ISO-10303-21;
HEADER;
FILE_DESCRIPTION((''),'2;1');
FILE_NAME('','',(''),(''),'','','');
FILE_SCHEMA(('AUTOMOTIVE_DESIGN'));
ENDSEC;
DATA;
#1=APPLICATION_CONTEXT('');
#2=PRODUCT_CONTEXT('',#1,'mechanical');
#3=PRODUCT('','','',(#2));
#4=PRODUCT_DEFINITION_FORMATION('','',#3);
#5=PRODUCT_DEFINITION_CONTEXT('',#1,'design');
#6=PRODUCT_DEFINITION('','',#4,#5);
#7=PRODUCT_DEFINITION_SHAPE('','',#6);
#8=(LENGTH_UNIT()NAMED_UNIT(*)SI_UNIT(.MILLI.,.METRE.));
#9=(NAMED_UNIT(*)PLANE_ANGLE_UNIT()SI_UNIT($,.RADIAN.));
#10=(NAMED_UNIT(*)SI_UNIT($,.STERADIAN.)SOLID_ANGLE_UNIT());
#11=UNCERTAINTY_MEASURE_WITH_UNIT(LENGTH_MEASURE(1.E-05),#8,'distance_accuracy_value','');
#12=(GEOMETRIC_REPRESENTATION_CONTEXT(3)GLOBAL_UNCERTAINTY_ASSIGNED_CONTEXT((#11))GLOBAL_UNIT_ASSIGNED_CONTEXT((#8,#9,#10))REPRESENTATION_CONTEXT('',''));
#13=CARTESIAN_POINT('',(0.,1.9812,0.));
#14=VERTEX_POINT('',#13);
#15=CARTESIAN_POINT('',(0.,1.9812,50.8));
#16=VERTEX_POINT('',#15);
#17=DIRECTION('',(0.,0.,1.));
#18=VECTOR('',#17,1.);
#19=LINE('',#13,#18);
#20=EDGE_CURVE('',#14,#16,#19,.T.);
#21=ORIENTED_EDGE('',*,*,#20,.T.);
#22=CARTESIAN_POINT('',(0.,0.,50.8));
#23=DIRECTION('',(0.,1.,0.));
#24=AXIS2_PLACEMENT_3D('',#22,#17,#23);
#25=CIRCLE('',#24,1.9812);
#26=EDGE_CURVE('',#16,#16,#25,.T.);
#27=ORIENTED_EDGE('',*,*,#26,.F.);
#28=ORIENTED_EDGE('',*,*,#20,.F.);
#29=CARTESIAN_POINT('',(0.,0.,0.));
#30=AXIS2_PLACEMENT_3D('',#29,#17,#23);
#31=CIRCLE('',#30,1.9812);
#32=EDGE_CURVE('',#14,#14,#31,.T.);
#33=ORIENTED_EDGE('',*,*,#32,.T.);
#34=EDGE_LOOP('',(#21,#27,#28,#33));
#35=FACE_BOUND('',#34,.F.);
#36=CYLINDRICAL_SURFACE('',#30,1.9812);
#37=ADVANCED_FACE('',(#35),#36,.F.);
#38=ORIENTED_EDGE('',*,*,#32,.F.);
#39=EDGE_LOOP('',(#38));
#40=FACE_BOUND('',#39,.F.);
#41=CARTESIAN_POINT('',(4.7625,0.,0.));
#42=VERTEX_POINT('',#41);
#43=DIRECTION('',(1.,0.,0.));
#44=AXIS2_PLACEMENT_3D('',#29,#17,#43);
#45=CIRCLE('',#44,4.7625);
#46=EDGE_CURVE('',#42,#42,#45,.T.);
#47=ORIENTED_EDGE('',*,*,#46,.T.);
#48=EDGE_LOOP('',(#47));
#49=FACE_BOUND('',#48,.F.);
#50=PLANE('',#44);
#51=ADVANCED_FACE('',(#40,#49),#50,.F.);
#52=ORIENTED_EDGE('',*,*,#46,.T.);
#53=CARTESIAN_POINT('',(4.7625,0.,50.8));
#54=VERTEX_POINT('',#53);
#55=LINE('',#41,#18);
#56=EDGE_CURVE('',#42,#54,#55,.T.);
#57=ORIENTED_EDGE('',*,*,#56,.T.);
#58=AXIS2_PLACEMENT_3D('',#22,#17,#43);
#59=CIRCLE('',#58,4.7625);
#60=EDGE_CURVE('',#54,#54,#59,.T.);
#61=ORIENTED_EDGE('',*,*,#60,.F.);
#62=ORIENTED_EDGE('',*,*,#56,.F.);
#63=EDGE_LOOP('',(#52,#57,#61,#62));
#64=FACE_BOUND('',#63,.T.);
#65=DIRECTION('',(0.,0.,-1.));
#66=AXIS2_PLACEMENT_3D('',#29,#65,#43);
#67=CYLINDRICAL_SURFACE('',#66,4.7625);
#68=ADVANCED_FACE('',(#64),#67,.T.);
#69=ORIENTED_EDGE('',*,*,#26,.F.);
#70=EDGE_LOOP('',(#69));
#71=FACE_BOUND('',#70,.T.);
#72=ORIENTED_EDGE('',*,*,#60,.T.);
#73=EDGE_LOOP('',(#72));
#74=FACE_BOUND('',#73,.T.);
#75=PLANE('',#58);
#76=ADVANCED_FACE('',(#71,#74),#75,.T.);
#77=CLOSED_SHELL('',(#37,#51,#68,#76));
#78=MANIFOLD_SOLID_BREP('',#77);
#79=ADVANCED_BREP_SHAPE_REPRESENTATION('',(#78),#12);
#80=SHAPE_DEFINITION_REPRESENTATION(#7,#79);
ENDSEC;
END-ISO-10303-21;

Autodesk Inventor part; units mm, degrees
ref_plane "YZ Plane" through (0, 0, 0) normal (1, 0, 0) x (0, 1, 0)
ref_plane "XZ Plane" through (0, 0, 0) normal (0, 1, 0) x (-1, 0, 0)
ref_plane "XY Plane" through (0, 0, 0) normal (0, 0, 1) x (1, 0, 0)
sketch "Sketch1" plane through (0, 0, 0) normal (0, 0, 1) x (1, 0, 0)
  circle A0 centre (0, 0) radius 4.7625
  dimension "d10" = 9.525
extrude "Extrusion1" add sketch "Sketch1" along normal blind 50.8
hole "Hole1" at (0, 0, 0) direction (0, 0, 1) diameter 3.9624 end through all thread size "10-32 UNF" class "2B" standard "ANSI Unified Screw Threads"
equation "\"d10\" = OutsideDiameter"
equation "\"d1\" = StandoffLength"
equation "\"StandoffLength\" = 50.8"
equation "\"HoleDiameter\" = 5.1054"
equation "\"OutsideDiameter\" = 9.525"
properties part number "CL7-019" material "Aluminum 6061"
